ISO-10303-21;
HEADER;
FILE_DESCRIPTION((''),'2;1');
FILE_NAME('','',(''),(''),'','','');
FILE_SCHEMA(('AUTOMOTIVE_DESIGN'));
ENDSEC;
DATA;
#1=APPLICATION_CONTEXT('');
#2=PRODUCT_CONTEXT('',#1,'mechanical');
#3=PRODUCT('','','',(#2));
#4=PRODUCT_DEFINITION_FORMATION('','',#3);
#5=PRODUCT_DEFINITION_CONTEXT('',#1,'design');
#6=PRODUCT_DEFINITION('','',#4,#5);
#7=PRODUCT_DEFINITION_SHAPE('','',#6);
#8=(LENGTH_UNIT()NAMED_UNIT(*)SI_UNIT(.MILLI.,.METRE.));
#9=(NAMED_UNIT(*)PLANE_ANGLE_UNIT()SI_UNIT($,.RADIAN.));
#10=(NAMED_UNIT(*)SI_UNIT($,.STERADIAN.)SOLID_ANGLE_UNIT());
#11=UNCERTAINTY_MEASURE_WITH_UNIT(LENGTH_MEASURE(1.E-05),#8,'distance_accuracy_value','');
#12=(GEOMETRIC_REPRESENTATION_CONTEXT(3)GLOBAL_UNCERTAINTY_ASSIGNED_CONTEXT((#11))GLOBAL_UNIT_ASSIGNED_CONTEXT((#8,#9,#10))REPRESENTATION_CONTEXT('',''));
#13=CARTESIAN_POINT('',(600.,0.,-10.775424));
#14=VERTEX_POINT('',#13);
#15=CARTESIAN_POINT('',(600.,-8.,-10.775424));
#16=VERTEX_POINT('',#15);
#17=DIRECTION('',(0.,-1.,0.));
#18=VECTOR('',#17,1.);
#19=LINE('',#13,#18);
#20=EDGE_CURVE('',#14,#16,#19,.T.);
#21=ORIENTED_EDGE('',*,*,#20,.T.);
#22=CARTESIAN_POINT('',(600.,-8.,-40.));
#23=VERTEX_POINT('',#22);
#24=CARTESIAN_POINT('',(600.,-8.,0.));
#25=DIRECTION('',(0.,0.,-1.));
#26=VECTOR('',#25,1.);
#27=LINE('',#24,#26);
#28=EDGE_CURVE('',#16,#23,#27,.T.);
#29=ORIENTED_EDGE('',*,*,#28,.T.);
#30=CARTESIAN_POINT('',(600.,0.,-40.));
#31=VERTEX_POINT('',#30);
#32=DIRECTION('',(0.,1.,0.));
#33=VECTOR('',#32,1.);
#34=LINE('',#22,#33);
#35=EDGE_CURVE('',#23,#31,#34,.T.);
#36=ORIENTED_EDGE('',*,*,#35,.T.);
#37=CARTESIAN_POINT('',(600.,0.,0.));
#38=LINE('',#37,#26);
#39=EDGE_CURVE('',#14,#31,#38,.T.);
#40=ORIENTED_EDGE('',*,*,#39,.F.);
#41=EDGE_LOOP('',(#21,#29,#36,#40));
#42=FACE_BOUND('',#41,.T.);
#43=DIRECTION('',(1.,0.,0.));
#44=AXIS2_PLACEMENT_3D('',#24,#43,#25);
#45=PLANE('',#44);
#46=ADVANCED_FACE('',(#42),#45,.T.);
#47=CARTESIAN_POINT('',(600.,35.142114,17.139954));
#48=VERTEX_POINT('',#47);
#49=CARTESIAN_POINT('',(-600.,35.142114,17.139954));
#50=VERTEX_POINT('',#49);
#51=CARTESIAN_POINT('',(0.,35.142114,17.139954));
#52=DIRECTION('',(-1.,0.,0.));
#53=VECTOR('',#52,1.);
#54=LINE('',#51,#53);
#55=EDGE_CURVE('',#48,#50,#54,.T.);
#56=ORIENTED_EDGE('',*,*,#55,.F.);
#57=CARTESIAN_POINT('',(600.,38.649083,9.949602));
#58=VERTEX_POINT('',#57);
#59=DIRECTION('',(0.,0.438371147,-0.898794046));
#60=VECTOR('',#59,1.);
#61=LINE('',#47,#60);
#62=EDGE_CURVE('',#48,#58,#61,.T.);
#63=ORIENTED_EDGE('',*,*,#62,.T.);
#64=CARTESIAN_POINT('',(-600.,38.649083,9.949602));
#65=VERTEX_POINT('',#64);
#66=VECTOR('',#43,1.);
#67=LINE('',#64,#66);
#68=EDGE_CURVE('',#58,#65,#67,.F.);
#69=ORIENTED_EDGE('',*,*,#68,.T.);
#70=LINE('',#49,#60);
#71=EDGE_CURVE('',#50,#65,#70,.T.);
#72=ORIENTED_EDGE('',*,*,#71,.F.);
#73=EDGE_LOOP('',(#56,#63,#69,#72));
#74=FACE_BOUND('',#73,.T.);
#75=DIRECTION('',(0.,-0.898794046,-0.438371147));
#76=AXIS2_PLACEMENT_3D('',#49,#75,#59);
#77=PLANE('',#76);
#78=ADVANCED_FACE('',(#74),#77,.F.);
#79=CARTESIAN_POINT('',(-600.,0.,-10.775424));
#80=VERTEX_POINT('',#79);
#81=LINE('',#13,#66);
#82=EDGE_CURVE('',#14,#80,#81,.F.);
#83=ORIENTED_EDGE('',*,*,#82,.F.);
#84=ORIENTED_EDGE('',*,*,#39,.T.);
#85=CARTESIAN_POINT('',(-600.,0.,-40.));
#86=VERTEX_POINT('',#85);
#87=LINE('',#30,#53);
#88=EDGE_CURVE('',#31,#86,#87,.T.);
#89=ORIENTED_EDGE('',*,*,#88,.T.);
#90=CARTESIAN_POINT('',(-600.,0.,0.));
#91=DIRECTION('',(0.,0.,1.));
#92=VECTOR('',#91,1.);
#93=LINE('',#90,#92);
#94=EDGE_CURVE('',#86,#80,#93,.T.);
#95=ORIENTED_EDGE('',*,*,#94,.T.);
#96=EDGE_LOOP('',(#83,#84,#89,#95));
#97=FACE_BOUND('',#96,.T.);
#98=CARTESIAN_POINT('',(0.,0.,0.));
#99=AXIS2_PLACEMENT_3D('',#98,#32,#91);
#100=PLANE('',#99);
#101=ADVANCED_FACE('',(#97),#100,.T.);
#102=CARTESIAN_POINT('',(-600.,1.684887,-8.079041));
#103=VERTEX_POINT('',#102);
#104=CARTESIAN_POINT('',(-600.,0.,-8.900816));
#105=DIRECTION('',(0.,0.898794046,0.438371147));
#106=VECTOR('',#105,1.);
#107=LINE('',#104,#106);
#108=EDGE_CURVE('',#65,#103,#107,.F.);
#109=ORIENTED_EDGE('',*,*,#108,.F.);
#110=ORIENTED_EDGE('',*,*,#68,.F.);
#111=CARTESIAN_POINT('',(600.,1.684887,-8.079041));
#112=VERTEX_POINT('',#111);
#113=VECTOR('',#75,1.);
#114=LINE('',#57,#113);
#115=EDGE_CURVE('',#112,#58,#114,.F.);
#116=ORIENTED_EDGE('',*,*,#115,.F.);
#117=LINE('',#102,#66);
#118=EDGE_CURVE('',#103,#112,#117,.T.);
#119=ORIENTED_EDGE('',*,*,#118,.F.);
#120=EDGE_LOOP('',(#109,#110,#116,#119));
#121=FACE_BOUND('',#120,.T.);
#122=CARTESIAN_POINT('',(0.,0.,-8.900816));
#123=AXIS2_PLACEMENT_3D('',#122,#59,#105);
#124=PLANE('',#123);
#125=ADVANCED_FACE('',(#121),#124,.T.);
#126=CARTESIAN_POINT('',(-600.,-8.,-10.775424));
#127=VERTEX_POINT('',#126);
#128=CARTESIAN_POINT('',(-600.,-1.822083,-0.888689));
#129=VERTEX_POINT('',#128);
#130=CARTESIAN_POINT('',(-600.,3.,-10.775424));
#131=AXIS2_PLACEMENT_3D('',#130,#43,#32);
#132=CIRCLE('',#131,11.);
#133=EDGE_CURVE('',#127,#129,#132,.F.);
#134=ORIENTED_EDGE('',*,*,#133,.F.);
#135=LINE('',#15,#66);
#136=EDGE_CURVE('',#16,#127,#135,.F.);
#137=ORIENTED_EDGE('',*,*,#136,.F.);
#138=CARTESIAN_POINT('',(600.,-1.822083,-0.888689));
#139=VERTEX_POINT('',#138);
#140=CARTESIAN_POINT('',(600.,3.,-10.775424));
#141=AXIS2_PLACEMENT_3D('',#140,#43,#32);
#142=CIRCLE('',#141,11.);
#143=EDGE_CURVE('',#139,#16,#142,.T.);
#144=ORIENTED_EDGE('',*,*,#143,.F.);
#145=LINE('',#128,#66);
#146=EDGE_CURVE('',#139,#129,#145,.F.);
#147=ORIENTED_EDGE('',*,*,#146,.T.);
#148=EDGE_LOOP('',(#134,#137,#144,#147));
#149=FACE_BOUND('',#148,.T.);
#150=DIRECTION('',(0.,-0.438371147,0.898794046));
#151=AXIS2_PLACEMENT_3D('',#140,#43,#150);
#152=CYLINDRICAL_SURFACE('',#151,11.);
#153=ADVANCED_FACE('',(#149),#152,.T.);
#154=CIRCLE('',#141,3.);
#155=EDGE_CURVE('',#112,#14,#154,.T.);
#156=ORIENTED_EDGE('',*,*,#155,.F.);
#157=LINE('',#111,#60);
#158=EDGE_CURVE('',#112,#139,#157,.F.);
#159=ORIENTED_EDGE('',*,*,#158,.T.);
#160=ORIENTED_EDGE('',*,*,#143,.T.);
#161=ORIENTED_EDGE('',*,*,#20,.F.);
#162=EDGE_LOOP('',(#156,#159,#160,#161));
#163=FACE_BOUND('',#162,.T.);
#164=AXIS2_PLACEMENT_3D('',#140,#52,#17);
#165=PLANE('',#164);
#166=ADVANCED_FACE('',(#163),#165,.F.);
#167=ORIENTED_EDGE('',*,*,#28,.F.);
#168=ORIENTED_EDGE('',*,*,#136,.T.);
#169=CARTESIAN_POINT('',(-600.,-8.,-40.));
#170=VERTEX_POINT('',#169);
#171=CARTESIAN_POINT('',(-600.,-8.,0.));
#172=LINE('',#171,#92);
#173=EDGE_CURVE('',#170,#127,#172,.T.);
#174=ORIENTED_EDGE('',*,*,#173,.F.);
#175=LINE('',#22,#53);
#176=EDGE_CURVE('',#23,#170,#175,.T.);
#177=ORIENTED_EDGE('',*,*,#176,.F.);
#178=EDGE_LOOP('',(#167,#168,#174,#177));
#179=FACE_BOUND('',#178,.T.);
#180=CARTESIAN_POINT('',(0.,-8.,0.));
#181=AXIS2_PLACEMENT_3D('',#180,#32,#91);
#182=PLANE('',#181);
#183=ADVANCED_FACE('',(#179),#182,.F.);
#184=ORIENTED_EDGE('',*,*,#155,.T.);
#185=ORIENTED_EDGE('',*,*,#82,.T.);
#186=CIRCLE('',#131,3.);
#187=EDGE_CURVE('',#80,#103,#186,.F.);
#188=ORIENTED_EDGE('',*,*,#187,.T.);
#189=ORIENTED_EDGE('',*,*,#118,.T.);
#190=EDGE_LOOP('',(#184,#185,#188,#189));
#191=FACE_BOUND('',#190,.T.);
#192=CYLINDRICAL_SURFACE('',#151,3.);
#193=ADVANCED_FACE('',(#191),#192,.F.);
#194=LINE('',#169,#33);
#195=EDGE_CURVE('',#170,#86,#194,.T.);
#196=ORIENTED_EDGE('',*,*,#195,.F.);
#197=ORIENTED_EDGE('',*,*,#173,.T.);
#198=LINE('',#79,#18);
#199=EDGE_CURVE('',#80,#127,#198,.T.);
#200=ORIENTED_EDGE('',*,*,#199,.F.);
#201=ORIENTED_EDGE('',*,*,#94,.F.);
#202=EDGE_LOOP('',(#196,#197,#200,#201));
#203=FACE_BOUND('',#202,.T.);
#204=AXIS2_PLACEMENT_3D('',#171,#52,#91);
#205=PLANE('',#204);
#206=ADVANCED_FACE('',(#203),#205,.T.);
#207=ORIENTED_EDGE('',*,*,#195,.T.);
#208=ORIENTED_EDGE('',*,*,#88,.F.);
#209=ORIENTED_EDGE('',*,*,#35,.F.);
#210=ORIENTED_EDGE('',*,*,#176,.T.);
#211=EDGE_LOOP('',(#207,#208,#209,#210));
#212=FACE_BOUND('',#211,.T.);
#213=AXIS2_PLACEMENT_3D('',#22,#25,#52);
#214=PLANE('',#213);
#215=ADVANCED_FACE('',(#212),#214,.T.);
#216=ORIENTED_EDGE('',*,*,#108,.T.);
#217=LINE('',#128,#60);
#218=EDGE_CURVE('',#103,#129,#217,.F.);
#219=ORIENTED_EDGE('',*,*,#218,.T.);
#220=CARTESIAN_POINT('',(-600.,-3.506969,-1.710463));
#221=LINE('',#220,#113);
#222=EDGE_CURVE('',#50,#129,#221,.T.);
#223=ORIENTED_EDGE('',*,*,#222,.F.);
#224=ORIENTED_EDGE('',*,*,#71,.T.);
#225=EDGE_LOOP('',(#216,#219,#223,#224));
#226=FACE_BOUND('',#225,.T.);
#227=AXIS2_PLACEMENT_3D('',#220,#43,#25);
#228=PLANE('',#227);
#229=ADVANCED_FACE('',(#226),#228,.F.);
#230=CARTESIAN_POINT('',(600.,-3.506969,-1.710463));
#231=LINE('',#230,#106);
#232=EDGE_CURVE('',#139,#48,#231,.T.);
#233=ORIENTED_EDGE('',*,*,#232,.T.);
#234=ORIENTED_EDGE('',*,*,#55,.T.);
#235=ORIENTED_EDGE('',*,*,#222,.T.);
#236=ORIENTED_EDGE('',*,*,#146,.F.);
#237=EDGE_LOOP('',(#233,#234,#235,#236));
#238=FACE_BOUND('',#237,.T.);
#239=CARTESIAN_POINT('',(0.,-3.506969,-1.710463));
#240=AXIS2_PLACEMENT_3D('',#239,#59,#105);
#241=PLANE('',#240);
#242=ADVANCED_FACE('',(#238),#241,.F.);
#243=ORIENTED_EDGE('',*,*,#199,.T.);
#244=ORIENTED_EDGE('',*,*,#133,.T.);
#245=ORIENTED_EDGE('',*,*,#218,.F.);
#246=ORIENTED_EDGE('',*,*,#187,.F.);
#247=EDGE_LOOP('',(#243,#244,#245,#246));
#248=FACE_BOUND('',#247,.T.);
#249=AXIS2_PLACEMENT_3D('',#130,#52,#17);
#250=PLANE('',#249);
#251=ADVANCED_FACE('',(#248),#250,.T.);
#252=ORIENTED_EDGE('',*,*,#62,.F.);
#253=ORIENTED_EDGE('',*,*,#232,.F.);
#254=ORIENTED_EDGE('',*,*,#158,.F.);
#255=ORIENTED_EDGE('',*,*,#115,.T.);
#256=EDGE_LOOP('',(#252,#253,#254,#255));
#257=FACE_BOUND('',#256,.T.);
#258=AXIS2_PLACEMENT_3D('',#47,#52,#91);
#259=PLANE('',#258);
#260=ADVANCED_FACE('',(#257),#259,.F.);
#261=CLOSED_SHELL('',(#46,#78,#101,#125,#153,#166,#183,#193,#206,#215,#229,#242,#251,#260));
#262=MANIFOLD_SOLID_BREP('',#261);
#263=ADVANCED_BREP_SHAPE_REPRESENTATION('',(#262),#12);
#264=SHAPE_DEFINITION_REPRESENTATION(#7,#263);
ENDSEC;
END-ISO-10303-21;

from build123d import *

# Parameters (mm, degrees)
SKETCH2_W            = 1200
SKETCH2_H            = 40
BASE_FLANGE1_DEPTH   = 8
EDGE_FLANGE1_START   = -600
EDGE_FLANGE1_DEPTH   = 1200
EDGE_FLANGE1_2_DEPTH = 1200


# Read off the part's stored shape, not the designer's step: Edge-Flange1
# Sheet-metal steps are written as plain solids
with BuildPart() as part:
    # Sketch2 → Base-Flange1 (new body)
    with BuildSketch(Plane(origin=(0, 0, 0), x_dir=(1, 0, 0), z_dir=(0, 1, 0))):
        with Locations((0, 20)):
            Rectangle(SKETCH2_W, SKETCH2_H)
    extrude(amount=-BASE_FLANGE1_DEPTH)

    # Edge-Flange1 outline → Edge-Flange1 (cut)
    with BuildSketch(Plane.YZ.offset(EDGE_FLANGE1_START)):
        with BuildLine():
            ThreePointArc((-8, -10.77542358), (-6.328529058, -4.946311673), (-1.822082615, -0.88868907))
            Line((-1.822082615, -0.88868907), (0, 0))
            Line((0, 0), (-8, 0))
            Line((-8, 0), (-8, -10.77542358))
        make_face()
    extrude(amount=EDGE_FLANGE1_DEPTH, mode=Mode.SUBTRACT)

    # Edge-Flange1 2 outline → Edge-Flange1 2 (add)
    with BuildSketch(Plane.YZ.offset(EDGE_FLANGE1_START)):
        with BuildLine():
            Line((35.142114222, 17.139954337), (0, 0))
            Line((0, 0), (0, -10.77542358))
            ThreePointArc((0, -10.77542358), (0.455855712, -9.185665787), (1.68488656, -8.079041441))
            Line((1.68488656, -8.079041441), (38.649083397, 9.949601967))
            Line((38.649083397, 9.949601967), (35.142114222, 17.139954337))
        make_face()
    extrude(amount=EDGE_FLANGE1_2_DEPTH)


solid = part.part
